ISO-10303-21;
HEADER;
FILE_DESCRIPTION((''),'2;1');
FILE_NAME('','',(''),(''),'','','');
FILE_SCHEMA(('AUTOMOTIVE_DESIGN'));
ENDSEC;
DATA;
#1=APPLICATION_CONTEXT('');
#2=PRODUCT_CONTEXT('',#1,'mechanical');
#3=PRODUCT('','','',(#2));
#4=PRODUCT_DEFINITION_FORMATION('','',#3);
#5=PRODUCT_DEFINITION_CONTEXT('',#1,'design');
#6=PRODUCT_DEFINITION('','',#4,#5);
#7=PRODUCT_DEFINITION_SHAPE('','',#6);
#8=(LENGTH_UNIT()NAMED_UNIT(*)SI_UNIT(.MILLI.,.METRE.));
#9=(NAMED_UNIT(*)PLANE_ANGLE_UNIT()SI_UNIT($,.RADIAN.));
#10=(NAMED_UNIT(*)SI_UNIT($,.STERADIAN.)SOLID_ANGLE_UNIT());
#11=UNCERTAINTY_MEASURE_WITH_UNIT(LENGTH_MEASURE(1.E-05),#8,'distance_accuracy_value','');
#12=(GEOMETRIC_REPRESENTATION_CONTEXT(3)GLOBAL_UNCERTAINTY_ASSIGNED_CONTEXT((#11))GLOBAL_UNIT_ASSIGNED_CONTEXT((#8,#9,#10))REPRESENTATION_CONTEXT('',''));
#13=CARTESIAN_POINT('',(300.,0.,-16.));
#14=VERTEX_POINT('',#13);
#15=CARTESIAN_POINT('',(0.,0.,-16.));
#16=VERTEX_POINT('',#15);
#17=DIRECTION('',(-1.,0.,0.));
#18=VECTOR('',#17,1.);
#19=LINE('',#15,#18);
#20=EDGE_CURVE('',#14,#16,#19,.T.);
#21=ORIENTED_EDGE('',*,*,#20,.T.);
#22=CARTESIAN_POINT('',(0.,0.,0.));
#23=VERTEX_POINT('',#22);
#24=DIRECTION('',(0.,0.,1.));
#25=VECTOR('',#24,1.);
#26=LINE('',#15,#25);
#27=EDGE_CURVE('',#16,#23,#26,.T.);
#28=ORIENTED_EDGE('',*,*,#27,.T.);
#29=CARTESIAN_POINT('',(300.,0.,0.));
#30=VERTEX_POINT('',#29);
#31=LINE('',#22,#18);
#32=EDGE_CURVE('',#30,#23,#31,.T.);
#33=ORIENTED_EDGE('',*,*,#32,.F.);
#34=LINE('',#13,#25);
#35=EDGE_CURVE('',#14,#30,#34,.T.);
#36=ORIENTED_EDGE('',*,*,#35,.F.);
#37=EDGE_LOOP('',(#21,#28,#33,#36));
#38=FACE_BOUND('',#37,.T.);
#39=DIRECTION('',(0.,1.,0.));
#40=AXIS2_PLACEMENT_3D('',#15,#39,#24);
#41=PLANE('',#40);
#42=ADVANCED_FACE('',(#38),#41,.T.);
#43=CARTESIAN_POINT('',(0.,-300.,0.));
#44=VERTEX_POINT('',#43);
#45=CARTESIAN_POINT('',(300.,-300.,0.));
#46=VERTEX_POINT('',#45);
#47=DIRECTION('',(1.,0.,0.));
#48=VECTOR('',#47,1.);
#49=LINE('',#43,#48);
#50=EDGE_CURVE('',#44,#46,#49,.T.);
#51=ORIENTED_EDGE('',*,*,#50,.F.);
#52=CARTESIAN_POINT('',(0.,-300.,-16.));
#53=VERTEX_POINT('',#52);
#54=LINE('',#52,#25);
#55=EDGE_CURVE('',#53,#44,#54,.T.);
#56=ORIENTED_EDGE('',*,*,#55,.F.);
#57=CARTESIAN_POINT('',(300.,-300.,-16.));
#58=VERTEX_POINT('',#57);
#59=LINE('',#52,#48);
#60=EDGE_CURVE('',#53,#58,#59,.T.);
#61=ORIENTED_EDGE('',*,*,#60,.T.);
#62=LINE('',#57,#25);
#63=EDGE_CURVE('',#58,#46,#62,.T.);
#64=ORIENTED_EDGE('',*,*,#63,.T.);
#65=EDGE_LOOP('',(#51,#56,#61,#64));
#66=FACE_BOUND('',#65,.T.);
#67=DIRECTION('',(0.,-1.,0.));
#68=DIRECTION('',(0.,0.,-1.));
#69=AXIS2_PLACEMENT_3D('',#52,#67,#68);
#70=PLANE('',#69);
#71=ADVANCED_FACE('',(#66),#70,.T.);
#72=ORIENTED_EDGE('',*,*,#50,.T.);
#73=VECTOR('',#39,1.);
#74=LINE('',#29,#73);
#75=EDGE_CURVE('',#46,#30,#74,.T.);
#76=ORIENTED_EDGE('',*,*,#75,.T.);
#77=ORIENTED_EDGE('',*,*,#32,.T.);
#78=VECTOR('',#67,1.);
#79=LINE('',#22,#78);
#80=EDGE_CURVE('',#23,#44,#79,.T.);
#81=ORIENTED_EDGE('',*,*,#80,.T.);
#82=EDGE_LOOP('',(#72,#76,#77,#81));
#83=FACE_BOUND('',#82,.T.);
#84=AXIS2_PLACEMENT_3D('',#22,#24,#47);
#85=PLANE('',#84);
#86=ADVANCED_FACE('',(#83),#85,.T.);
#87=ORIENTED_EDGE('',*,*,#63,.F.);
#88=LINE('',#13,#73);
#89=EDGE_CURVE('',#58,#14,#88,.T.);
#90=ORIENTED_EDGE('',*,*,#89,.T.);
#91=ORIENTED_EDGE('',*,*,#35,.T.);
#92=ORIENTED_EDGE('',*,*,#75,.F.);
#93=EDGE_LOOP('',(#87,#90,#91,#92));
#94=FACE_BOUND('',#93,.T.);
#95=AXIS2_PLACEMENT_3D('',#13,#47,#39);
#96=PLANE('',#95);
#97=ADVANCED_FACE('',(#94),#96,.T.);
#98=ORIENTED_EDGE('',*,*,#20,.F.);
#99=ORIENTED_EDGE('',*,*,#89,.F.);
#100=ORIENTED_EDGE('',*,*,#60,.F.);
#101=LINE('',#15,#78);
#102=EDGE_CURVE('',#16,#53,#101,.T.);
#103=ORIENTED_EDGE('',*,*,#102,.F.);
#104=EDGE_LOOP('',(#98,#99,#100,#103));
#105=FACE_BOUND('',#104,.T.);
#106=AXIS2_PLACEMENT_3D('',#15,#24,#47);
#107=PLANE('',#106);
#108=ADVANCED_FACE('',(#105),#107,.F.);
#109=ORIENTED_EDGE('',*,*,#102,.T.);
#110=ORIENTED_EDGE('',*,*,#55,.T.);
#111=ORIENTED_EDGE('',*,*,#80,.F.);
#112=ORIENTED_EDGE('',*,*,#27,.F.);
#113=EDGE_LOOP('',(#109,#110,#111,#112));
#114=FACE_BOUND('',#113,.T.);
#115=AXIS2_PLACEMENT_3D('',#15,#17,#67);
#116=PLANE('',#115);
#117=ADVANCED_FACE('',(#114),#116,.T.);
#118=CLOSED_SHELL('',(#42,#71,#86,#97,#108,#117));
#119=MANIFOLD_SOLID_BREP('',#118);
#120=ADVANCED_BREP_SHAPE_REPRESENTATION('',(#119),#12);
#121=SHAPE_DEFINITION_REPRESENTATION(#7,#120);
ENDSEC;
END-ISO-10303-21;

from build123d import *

# Parameters (mm, degrees)
SKETCH_1_W             = 300
SKETCH_1_H             = 300
SM_BASE_FLANGE_1_DEPTH = 16


# Sheet-metal steps are written as plain solids
with BuildPart() as part:
    # Sketch 1 → Базовая кромка1 (new body)
    with BuildSketch(Plane.XY):
        with Locations((150, -150)):
            Rectangle(SKETCH_1_W, SKETCH_1_H)
    extrude(amount=-SM_BASE_FLANGE_1_DEPTH)


solid = part.part
